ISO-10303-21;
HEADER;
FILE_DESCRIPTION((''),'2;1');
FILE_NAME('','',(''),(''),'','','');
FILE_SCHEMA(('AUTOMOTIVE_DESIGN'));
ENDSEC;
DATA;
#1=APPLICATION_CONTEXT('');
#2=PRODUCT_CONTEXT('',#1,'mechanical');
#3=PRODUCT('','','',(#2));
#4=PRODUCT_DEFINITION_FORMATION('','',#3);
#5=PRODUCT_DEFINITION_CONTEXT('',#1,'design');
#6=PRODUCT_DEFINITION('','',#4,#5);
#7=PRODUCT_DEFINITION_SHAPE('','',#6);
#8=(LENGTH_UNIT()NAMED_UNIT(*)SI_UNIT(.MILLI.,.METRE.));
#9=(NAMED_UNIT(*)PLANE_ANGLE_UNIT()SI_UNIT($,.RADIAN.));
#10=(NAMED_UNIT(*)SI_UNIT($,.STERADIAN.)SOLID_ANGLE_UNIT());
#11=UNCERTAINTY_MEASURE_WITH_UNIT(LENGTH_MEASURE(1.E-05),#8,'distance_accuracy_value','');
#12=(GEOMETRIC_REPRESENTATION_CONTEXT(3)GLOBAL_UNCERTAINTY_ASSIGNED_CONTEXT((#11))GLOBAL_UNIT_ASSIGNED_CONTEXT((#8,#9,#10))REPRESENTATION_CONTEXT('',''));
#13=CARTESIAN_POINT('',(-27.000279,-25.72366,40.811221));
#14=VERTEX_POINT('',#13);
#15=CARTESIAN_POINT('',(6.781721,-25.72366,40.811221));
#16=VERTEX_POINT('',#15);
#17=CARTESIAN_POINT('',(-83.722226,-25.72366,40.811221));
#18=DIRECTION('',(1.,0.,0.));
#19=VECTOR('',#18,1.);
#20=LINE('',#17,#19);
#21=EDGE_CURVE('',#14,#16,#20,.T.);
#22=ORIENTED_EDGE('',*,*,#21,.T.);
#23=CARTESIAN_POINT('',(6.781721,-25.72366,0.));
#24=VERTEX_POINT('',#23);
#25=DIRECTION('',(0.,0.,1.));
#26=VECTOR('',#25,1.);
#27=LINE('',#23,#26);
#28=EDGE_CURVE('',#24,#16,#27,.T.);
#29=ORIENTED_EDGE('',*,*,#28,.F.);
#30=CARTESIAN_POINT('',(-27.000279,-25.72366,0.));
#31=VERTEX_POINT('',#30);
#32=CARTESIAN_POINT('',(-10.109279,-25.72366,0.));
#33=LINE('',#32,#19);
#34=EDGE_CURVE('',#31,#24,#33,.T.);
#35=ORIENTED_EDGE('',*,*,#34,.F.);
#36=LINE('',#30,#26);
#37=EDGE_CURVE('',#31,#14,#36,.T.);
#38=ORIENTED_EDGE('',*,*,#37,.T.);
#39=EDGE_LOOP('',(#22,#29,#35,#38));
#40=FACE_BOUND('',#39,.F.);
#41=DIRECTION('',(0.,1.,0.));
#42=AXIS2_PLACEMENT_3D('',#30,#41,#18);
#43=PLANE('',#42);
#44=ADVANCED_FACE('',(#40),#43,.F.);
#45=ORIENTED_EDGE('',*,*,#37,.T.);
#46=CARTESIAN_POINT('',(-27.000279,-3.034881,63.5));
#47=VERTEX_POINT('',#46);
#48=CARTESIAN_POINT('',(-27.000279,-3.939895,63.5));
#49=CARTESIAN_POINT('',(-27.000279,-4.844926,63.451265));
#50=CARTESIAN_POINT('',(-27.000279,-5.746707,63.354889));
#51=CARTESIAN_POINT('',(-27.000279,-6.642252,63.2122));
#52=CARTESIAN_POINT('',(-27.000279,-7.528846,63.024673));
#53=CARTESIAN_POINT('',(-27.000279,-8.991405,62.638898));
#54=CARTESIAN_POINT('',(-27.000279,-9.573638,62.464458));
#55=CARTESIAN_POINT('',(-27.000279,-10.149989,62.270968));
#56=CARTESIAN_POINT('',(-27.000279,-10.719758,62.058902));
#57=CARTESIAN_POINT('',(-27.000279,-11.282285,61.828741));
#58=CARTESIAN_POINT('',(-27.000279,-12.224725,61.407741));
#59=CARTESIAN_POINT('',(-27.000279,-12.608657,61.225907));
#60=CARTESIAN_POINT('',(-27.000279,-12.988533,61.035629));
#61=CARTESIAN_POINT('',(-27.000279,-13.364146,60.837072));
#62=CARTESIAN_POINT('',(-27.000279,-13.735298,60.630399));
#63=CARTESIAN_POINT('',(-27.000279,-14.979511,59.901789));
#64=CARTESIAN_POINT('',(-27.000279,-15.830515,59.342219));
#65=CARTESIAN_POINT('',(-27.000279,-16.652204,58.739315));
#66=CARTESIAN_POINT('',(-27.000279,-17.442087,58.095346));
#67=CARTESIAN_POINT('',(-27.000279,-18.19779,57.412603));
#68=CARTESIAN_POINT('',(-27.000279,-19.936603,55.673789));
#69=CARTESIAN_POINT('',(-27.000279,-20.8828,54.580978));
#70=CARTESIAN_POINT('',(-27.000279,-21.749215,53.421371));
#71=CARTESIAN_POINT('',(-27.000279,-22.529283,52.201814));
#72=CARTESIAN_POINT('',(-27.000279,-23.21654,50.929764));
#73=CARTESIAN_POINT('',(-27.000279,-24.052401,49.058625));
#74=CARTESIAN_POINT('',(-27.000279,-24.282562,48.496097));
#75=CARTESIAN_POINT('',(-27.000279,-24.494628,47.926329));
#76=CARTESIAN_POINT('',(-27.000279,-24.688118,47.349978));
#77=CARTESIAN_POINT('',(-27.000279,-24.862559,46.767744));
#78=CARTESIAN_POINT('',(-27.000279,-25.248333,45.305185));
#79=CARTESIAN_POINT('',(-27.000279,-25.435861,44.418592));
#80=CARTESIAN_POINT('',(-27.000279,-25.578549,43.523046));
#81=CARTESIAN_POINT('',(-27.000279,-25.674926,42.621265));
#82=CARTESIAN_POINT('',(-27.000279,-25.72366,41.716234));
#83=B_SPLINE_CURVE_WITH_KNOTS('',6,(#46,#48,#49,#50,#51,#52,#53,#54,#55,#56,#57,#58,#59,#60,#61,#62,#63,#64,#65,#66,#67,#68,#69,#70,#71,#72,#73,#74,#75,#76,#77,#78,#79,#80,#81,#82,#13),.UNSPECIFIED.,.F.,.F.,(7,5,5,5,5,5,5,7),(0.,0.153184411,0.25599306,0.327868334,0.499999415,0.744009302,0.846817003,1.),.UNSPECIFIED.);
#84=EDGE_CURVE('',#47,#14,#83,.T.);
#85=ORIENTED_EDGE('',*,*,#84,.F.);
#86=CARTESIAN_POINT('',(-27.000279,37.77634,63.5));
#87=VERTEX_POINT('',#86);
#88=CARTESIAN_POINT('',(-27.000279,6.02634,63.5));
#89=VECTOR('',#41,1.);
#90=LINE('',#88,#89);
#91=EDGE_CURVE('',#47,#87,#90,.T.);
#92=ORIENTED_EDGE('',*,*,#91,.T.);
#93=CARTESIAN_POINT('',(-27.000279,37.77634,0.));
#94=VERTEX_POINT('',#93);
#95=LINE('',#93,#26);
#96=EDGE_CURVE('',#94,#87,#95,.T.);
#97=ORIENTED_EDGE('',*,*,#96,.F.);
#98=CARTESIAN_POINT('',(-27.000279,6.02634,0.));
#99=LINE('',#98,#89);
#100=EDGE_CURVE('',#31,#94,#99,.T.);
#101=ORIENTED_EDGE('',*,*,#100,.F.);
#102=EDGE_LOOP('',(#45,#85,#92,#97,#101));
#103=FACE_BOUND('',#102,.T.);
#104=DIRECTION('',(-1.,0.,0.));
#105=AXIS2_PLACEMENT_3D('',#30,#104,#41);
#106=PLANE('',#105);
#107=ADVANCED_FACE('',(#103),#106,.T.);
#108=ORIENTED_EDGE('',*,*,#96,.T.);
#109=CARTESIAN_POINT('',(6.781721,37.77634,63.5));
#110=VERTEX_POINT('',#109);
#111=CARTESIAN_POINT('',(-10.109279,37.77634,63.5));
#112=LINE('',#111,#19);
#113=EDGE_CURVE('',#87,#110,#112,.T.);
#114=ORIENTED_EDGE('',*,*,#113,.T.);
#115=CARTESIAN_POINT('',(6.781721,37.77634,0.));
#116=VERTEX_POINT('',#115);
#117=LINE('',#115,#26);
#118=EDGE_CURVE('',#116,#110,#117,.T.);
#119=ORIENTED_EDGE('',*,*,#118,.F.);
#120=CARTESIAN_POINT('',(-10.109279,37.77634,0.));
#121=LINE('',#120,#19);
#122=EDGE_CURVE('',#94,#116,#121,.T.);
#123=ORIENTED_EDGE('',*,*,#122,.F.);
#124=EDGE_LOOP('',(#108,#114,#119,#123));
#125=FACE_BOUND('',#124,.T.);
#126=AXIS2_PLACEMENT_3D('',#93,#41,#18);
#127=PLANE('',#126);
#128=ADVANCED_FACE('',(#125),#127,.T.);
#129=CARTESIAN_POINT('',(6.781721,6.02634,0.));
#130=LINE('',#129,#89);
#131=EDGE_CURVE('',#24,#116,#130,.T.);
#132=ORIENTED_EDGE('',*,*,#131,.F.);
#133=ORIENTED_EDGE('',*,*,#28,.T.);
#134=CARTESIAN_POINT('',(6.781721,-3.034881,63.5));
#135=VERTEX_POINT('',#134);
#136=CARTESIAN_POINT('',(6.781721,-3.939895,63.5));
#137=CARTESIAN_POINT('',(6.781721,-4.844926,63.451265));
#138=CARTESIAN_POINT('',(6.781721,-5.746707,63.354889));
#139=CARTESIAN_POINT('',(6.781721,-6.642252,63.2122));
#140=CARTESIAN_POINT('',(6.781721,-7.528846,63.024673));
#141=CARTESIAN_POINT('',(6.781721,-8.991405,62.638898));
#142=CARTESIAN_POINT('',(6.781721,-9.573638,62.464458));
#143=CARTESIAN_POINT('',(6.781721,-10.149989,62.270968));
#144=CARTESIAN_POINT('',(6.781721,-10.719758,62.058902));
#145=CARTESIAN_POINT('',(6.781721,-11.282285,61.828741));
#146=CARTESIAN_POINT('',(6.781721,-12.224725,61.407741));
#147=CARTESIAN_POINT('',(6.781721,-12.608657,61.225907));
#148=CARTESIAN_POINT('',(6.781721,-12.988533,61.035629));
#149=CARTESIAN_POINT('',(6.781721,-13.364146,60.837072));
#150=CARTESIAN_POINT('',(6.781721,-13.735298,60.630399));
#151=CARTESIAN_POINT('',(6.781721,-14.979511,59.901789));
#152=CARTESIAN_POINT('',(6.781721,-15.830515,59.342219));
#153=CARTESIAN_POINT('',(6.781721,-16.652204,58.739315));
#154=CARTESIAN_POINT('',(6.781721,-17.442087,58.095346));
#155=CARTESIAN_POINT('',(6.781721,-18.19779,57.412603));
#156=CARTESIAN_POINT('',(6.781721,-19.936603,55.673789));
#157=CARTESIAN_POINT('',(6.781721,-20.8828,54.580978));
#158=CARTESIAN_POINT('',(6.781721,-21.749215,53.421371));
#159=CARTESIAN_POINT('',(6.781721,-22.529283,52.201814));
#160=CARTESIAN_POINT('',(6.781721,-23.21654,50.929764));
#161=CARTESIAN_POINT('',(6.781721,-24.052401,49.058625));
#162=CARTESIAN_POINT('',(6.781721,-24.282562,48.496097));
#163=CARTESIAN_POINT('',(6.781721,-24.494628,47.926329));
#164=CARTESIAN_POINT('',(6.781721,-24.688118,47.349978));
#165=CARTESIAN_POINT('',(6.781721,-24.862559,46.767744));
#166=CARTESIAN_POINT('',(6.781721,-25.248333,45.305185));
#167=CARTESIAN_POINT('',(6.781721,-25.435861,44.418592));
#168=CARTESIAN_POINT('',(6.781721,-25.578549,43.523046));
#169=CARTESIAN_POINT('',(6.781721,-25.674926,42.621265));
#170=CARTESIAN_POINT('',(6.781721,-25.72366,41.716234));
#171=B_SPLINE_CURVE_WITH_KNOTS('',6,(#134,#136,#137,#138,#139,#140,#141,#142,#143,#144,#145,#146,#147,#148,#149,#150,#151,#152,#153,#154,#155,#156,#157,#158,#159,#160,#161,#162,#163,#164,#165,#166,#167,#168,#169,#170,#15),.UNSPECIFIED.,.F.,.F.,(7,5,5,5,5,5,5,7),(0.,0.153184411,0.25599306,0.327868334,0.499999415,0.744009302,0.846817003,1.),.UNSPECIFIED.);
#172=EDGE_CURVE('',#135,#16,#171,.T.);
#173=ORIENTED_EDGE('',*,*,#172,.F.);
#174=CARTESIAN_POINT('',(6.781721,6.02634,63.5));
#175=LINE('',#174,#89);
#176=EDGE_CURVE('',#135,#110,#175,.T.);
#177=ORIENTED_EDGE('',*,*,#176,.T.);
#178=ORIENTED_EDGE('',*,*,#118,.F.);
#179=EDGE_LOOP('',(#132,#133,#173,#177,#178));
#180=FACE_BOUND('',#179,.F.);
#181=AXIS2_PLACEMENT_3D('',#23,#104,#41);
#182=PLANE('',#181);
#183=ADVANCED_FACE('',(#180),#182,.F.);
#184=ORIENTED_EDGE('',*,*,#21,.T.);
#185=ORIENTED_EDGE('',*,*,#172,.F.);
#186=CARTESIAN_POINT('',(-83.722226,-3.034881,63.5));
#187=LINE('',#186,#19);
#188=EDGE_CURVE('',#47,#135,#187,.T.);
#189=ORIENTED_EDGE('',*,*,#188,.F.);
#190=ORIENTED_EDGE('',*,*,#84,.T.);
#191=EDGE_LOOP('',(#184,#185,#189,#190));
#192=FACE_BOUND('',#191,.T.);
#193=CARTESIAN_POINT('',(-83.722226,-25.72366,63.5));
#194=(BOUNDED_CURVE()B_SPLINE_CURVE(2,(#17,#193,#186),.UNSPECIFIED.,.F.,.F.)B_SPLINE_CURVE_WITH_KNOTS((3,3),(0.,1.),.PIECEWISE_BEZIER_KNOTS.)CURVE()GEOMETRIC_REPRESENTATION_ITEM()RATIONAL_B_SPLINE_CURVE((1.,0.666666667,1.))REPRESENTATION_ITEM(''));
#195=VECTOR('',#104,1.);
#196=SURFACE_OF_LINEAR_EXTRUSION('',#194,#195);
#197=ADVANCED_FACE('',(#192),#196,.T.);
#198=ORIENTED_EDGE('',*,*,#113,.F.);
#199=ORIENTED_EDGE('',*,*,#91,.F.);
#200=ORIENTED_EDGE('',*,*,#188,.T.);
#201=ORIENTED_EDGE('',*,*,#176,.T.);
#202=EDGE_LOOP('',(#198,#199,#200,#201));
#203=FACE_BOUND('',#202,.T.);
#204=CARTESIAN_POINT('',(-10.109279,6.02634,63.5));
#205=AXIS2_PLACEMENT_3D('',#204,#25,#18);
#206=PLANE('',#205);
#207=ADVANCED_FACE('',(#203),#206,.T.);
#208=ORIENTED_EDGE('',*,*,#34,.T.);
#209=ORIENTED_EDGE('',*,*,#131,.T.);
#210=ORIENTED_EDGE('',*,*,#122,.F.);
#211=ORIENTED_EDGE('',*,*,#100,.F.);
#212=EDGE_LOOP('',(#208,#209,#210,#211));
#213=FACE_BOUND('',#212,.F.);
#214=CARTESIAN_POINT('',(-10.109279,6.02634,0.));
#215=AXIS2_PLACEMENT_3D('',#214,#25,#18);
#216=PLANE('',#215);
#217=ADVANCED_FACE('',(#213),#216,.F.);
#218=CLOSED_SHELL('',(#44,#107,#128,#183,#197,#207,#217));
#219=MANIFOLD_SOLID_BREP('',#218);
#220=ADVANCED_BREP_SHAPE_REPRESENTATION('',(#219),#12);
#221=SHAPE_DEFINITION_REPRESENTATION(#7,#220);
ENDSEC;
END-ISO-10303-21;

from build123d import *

# Parameters (mm, degrees)
F0_W        = 33.782
F0_H        = 63.5
F1_DEPTH    = 63.5
F2_T1_DEPTH = 147.2258952959


# Not quite as in the source:
# - a fillet or chamfer that OpenCascade refuses, or shapes differently, is made with other operations: its cross-section is extruded or revolved along the edge and cut away or added


with BuildPart() as f1:
    # F0 (on Top) → F1 (new body)
    with BuildSketch(Plane.XY):
        with Locations((-10.1092787267, 6.0263396353)):
            Rectangle(F0_W, F0_H)
    extrude(amount=F1_DEPTH)

    # F2: fillet of radius 22.6887790592 on 1 edges, made by hand

    # F2_s2 → F2_t1 (cut)
    with BuildSketch(Plane.YZ.offset(-83.7222263746)):
        with BuildLine():
            add(Edge.make_bspline(
                [(-25.7236603647, 40.8112209408), (-25.7236603647, 63.5), (-3.0348813056, 63.5)],
                knots=[0, 0, 0, 1, 1, 1], degree=2, weights=[1, 0.6666666667, 1]))
            Line((-3.0348813056, 63.5), (-25.7236603647, 63.5))
            Line((-25.7236603647, 63.5), (-25.7236603647, 40.8112209408))
        make_face()
    extrude(amount=F2_T1_DEPTH, mode=Mode.SUBTRACT)


solid = f1.part
